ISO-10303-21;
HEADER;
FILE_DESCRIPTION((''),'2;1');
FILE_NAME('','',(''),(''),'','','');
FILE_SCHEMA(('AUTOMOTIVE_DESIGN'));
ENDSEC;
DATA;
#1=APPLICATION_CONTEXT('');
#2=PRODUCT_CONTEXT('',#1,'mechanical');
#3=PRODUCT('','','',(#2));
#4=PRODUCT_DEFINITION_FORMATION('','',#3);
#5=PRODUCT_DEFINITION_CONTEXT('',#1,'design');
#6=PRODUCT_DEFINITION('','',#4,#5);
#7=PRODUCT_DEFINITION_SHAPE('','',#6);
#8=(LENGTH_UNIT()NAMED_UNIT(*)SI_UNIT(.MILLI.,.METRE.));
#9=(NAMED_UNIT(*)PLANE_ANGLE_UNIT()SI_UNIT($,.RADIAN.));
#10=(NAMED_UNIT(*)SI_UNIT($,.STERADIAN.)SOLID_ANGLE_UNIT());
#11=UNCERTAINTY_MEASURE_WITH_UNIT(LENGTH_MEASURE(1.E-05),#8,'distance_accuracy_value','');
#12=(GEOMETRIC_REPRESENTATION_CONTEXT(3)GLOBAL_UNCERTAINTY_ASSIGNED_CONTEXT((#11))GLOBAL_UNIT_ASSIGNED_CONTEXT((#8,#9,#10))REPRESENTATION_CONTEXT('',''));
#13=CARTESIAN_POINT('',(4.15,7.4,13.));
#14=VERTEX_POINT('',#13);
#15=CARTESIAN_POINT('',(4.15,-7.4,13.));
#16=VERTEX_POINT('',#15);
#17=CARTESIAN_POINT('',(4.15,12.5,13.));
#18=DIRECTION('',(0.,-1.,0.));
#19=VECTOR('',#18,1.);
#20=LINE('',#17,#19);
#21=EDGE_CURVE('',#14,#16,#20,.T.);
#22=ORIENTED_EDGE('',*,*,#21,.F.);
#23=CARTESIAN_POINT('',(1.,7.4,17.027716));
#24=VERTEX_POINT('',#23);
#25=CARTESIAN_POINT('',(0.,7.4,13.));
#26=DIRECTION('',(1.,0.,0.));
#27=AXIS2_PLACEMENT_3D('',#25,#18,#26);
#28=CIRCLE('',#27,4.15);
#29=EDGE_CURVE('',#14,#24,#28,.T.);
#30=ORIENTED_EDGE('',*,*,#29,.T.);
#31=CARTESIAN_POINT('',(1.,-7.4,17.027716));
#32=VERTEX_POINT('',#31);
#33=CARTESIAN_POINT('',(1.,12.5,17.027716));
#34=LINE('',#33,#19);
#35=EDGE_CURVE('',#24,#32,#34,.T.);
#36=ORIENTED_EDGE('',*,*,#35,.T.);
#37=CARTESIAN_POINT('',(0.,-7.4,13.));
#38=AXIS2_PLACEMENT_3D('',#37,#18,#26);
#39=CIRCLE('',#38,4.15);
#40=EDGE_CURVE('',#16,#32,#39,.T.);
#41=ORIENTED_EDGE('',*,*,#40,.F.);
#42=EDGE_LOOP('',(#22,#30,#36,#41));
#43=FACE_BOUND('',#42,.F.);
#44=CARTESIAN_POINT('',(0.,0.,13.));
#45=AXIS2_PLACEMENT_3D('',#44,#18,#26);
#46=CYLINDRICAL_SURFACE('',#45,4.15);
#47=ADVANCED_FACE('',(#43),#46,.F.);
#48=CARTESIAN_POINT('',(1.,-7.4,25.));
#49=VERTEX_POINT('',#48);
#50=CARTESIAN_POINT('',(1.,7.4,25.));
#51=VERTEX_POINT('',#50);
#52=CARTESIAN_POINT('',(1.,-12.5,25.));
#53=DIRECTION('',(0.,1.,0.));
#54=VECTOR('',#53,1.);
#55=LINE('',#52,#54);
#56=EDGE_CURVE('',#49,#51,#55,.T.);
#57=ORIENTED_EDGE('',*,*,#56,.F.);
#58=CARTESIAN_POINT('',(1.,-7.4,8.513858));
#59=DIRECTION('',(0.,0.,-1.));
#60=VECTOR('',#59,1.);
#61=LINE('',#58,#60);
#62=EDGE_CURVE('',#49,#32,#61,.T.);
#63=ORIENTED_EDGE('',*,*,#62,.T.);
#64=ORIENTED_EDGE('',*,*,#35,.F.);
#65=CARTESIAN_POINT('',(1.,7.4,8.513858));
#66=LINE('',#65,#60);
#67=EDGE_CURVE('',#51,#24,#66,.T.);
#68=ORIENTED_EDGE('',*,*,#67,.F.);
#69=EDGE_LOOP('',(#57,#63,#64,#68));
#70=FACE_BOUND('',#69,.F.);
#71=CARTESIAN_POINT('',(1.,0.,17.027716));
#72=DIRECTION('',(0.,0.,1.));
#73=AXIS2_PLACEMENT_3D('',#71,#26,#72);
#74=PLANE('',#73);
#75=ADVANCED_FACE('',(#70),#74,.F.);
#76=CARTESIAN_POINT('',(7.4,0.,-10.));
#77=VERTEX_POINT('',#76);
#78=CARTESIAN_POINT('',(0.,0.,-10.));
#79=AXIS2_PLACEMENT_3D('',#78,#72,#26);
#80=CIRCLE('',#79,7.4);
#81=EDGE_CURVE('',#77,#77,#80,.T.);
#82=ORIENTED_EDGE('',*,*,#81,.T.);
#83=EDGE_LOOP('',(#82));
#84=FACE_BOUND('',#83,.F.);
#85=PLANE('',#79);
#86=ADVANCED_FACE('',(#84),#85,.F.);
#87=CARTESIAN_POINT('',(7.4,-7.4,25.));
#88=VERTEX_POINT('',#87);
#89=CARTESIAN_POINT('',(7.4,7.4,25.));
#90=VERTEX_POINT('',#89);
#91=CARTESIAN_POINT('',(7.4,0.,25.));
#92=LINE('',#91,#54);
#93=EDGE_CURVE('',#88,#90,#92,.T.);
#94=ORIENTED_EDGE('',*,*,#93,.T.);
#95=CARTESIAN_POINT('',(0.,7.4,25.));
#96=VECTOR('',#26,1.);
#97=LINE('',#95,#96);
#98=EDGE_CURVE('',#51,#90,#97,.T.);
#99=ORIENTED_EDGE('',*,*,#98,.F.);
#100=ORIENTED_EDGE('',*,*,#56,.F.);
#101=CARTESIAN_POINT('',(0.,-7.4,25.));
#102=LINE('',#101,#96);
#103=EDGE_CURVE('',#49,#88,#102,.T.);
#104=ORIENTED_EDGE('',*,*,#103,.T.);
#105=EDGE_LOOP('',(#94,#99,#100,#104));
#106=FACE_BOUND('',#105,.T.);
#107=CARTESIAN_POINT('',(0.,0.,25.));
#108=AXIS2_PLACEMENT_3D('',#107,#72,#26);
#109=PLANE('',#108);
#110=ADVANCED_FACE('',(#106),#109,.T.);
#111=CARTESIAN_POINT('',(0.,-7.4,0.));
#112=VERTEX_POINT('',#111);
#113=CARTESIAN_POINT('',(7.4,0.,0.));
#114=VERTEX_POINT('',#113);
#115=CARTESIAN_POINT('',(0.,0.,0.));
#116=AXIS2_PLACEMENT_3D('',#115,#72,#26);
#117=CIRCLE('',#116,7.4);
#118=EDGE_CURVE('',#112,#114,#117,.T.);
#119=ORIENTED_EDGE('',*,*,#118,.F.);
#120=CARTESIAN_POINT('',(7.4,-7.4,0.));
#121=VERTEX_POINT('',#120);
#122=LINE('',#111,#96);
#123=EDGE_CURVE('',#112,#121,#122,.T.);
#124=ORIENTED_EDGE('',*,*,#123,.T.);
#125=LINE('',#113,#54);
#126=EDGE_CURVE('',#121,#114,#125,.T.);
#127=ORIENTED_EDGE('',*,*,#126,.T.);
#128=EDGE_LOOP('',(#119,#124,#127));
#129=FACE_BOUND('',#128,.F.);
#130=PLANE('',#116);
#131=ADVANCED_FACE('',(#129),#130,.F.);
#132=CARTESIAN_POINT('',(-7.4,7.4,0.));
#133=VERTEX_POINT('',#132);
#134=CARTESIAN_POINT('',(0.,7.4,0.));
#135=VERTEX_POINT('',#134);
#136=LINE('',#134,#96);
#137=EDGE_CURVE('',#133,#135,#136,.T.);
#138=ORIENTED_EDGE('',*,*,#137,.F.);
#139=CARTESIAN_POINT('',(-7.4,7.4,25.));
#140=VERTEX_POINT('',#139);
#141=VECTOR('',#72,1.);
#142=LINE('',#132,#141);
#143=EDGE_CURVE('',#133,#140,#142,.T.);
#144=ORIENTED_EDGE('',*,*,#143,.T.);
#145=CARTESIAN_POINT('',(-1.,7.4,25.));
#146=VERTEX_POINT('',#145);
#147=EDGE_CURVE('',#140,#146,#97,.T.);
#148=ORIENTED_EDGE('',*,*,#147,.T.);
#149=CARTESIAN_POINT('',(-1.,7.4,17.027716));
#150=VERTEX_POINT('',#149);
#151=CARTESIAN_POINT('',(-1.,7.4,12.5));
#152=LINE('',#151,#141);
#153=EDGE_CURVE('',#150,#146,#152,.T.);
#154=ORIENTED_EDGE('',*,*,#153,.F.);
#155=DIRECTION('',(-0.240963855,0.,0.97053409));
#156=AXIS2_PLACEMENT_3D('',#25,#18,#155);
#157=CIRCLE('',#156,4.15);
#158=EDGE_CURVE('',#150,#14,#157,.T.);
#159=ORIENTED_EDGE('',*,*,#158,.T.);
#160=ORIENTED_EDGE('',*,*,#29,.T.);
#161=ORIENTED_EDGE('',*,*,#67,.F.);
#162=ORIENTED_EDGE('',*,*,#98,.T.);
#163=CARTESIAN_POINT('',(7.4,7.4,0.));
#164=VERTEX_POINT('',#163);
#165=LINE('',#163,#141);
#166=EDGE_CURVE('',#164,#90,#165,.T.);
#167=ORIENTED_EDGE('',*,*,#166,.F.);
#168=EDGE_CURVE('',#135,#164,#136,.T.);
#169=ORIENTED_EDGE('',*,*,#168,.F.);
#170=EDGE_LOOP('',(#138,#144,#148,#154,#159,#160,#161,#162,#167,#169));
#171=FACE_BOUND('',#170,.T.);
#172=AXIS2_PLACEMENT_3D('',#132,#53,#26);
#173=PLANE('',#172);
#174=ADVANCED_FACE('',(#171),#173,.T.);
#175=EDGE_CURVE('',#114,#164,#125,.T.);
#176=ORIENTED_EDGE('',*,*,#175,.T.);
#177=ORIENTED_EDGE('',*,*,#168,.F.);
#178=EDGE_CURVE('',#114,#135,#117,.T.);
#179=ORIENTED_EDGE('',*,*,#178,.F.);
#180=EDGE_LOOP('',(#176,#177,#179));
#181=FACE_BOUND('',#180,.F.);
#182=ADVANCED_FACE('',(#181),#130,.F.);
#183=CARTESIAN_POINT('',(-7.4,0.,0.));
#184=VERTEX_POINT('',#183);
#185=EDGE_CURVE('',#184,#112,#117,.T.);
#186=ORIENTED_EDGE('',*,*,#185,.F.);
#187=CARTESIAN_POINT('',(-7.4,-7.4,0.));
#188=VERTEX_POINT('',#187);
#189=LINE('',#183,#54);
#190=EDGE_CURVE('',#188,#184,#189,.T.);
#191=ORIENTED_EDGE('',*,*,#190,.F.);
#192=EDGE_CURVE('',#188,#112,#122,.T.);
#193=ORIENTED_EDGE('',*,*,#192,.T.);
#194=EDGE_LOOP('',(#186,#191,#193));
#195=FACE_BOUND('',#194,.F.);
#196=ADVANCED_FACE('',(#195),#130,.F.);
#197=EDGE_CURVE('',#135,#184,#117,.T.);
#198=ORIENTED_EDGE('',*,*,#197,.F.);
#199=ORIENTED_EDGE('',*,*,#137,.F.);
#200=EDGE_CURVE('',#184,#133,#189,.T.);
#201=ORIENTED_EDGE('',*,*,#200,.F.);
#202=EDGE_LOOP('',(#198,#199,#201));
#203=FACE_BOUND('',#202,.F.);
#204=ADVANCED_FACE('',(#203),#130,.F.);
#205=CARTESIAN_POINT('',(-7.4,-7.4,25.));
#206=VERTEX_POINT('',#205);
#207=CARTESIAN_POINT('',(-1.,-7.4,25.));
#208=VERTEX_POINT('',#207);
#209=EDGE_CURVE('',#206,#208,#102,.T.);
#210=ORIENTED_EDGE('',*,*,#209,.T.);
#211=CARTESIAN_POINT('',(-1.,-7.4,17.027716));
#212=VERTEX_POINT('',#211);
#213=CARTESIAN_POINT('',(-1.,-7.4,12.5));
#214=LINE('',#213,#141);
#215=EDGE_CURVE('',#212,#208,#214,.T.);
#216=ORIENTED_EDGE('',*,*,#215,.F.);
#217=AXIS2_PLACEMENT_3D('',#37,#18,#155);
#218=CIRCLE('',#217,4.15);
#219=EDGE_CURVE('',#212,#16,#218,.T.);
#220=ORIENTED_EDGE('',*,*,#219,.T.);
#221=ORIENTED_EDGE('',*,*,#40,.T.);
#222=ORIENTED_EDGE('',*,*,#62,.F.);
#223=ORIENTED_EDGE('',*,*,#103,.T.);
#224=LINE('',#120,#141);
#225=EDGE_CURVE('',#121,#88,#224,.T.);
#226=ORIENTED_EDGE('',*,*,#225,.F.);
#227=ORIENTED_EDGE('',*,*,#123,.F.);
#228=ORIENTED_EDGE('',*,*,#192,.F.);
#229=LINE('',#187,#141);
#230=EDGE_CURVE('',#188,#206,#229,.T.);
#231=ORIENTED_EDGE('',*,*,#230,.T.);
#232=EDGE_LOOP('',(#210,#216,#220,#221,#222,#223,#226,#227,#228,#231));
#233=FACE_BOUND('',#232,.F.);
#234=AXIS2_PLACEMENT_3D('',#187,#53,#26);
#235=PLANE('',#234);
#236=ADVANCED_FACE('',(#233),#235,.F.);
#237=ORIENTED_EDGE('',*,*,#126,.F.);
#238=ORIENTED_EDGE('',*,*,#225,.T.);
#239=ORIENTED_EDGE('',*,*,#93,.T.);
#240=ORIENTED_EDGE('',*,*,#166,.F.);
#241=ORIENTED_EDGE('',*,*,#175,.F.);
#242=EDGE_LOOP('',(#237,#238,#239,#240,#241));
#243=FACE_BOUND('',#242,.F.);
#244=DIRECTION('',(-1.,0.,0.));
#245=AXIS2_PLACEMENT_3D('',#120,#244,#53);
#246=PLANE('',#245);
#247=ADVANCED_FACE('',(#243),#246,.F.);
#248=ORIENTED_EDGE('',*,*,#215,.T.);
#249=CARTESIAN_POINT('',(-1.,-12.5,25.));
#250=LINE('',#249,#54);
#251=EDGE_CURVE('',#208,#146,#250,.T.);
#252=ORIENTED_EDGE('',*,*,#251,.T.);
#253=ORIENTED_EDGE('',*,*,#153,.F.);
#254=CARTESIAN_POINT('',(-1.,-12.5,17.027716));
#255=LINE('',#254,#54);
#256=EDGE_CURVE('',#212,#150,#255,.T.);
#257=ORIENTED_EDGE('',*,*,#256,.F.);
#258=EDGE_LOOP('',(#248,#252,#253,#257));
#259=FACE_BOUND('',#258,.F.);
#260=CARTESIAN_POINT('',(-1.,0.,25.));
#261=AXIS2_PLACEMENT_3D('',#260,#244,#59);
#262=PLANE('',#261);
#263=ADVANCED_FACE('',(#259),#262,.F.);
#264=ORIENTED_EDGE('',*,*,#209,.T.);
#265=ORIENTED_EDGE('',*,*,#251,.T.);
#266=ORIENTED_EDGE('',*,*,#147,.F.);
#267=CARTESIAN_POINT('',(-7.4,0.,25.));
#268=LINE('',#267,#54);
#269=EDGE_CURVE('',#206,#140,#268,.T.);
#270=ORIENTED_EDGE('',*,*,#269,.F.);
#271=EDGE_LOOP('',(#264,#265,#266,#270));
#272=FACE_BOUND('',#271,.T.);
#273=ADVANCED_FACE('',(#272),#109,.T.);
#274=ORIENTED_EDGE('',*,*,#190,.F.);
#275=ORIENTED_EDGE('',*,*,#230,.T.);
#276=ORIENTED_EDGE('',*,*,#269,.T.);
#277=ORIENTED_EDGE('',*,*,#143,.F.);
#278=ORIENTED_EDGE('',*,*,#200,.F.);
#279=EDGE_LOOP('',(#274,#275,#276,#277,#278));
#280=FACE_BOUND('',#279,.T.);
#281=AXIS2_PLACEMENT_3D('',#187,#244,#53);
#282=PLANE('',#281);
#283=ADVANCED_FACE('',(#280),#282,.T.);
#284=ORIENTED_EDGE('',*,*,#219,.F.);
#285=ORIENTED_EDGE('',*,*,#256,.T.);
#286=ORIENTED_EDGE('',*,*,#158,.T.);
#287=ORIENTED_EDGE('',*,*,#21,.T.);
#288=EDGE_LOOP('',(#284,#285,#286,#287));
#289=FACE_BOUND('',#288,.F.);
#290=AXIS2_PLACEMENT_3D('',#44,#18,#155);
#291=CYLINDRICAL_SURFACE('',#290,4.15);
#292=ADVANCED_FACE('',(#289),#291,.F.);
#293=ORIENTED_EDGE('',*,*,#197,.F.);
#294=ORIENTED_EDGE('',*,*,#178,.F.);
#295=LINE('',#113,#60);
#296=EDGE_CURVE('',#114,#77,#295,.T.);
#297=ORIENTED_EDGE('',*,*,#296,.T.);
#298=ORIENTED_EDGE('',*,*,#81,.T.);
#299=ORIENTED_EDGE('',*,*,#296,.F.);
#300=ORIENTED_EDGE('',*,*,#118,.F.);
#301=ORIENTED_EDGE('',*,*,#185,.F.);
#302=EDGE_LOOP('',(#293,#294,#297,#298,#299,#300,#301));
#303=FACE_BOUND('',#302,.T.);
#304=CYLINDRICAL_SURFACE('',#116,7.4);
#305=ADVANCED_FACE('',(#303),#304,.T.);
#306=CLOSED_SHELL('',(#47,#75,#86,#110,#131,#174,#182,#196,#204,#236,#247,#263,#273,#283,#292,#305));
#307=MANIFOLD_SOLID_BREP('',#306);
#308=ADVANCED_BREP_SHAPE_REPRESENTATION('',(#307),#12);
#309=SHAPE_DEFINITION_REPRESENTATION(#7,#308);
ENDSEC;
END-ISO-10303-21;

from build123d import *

# Parameters (mm, degrees)
F0_R     = 7.4
F1_DEPTH = 10
F2_W     = 14.8
F2_H     = 14.8
F3_DEPTH = 25
F5_DEPTH = 12.5


with BuildPart() as f1:
    # F0 (on Top) → F1 (new body)
    with BuildSketch(Plane.XY):
        Circle(F0_R)
    extrude(amount=-F1_DEPTH)

    # F2 (on face) → F3 (join)
    with BuildSketch(Plane.XY):
        Rectangle(F2_W, F2_H)
    extrude(amount=F3_DEPTH)

    # F4 (on Front) → F5 (cut, symmetric)
    with BuildSketch(Plane.XZ):
        with BuildLine():
            ThreePointArc((-1, 17.0277164746), (-2.5566090824, 9.7310169777), (4.15, 13))
            ThreePointArc((4.15, 13), (3.2689830223, 15.5566090824), (1, 17.0277164746))
            Line((1, 17.0277164746), (1, 13))
            Line((1, 13), (-1, 13))
            Line((-1, 13), (-1, 17.0277164746))
        make_face()
        with BuildLine():
            Line((1, 13), (1, 17.0277164746))
            ThreePointArc((1, 17.0277164746), (0, 17.15), (-1, 17.0277164746))
            Line((-1, 17.0277164746), (-1, 13))
            Line((-1, 13), (1, 13))
        make_face()
        with BuildLine():
            ThreePointArc((-1, 17.0277164746), (0, 17.15), (1, 17.0277164746))
            Line((1, 17.0277164746), (1, 25))
            Line((1, 25), (-1, 25))
            Line((-1, 25), (-1, 17.0277164746))
        make_face()
    extrude(amount=F5_DEPTH, both=True, mode=Mode.SUBTRACT)


solid = f1.part
